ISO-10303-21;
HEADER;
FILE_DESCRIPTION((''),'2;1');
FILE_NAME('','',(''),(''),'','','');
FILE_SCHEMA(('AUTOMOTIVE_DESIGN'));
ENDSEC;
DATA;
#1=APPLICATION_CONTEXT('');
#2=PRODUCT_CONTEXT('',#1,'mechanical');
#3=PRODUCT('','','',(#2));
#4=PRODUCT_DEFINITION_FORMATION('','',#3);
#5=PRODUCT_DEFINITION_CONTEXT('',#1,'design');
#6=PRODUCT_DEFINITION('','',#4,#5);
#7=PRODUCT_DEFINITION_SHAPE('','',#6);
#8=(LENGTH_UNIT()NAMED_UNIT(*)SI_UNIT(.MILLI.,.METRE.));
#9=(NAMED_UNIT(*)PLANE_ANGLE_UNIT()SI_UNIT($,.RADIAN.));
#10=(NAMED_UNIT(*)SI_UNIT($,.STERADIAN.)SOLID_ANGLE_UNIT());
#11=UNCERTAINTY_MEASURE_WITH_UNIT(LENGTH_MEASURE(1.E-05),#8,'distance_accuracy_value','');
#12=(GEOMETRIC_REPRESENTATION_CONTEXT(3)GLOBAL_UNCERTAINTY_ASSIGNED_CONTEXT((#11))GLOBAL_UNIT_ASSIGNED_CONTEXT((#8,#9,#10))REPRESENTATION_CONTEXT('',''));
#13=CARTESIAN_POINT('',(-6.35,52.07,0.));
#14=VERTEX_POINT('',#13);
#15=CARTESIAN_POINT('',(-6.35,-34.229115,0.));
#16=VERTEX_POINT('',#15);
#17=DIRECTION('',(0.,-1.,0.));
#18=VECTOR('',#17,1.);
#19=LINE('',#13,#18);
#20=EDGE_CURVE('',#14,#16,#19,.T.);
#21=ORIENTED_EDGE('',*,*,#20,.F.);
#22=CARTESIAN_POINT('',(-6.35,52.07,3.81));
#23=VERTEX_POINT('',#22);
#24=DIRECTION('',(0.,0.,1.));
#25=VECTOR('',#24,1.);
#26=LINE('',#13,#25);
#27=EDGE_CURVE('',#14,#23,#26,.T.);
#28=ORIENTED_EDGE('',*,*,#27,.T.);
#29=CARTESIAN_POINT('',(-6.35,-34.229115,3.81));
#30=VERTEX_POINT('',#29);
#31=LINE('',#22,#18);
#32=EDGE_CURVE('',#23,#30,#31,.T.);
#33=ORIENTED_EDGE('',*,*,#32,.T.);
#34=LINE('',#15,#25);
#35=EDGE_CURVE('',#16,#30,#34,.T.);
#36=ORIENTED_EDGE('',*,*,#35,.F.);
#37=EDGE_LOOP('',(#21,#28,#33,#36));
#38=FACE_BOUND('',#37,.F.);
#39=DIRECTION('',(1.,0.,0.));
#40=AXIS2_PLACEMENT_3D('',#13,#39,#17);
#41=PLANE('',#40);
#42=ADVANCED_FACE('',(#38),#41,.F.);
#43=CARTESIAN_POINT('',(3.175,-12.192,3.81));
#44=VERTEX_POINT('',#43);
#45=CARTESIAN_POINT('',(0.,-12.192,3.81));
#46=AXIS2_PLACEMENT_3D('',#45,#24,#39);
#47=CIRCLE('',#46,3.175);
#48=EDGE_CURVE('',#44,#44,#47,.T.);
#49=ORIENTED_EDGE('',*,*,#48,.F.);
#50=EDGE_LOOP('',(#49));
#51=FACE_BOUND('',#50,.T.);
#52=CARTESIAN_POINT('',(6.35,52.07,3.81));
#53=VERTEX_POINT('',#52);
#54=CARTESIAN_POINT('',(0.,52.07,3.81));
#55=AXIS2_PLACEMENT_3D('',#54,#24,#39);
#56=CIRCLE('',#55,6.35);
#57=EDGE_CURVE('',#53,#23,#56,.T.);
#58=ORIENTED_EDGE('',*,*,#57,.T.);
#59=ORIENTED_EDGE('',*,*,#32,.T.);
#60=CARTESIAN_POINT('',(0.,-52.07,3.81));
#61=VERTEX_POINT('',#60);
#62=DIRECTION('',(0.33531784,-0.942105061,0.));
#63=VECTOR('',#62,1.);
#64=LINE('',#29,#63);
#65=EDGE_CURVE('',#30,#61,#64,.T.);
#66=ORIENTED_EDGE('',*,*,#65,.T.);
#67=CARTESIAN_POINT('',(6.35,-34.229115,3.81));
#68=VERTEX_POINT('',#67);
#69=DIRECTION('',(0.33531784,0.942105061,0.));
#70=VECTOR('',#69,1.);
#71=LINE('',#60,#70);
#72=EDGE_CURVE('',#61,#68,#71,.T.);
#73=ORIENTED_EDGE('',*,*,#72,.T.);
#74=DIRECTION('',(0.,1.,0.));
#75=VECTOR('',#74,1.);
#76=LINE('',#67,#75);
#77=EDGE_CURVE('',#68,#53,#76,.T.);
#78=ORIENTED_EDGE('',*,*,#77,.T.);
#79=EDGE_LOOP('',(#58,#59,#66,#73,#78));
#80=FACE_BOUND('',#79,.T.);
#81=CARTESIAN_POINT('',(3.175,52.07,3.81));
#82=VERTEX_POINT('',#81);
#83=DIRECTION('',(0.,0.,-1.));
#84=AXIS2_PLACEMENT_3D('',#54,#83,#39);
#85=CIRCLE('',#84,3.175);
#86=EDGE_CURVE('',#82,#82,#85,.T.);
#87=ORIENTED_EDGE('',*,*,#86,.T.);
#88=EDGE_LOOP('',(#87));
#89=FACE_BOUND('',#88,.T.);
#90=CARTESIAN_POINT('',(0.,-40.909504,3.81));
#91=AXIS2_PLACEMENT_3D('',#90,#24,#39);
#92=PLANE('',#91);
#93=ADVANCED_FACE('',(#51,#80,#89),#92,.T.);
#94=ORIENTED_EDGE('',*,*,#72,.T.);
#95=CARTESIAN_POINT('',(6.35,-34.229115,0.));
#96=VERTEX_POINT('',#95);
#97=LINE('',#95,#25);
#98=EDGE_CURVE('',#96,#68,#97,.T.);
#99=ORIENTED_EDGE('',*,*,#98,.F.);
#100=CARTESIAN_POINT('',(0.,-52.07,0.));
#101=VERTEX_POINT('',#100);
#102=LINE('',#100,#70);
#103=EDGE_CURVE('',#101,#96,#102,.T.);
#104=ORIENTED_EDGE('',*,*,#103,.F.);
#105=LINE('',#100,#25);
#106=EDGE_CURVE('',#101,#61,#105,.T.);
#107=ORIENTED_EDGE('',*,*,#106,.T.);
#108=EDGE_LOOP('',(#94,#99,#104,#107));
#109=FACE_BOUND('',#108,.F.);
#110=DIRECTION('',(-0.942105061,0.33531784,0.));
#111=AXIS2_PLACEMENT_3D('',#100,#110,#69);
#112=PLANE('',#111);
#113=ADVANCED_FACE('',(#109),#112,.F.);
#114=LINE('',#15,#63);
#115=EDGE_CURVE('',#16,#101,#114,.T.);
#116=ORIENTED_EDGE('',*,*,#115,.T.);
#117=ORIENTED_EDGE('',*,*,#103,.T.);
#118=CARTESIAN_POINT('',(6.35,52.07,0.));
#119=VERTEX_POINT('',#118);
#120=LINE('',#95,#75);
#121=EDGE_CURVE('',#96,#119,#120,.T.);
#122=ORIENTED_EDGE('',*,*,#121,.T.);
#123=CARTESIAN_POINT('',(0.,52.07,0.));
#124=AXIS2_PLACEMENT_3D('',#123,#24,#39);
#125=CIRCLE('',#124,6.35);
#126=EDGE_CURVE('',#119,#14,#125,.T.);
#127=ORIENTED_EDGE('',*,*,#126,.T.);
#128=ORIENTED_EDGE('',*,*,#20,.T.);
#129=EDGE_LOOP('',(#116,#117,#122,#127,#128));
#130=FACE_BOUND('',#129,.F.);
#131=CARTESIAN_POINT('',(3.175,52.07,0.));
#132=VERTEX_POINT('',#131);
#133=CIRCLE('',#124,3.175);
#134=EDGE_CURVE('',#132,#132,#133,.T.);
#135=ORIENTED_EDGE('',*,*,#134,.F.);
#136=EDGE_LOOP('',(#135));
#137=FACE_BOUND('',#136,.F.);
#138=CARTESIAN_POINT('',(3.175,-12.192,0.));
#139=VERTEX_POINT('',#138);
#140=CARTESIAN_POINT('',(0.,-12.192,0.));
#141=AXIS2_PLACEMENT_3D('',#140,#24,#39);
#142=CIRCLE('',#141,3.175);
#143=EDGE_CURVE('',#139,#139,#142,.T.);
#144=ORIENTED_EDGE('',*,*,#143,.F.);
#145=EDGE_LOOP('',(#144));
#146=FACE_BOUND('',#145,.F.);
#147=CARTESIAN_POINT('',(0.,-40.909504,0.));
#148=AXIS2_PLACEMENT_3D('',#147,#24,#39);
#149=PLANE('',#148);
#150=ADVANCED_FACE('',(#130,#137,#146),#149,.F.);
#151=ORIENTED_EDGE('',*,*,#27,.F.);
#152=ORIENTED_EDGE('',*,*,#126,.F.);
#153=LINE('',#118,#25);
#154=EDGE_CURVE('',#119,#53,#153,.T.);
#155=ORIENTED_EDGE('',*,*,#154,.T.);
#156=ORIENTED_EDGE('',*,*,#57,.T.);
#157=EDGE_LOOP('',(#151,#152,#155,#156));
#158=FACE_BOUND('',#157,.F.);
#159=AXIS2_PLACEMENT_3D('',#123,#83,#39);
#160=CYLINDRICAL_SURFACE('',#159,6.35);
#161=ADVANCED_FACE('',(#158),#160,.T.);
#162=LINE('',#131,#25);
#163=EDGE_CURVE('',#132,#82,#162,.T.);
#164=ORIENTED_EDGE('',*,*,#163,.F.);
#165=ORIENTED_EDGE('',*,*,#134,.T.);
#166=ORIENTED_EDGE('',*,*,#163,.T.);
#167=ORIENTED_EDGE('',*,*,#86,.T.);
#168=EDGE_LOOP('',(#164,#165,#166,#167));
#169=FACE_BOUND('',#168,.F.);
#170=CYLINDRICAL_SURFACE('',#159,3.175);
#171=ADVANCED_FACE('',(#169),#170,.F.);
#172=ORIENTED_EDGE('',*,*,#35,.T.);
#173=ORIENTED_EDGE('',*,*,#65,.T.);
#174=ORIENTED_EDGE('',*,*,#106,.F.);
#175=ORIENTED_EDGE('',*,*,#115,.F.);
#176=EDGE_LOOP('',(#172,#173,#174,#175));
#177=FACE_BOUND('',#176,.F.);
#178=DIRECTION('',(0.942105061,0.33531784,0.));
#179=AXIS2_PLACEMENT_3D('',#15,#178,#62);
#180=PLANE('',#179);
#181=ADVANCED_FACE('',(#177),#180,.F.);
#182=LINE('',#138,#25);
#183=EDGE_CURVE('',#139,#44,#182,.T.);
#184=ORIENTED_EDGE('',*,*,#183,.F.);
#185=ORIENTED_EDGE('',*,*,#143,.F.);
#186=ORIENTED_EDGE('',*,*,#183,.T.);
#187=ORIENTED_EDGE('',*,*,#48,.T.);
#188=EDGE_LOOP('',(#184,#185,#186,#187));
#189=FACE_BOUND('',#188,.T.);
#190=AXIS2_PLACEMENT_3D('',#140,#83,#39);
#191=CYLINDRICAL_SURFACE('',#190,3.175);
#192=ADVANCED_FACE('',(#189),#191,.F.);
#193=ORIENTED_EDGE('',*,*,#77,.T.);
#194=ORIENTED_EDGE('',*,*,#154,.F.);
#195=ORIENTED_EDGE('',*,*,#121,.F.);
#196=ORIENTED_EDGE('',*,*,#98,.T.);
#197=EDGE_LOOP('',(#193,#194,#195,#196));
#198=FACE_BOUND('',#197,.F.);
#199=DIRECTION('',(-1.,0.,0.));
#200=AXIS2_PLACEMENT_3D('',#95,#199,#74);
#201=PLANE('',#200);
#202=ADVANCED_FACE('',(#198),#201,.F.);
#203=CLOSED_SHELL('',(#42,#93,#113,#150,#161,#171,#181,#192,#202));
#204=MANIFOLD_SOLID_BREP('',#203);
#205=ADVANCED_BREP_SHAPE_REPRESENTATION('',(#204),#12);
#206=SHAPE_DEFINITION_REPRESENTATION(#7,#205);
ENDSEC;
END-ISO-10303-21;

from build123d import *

# Parameters (mm, degrees)
F1_DEPTH = 3.81
F0_R     = 3.175
F2_DEPTH = 3.81


# Not quite as in the source:
# - a feature names something its author has since deleted; it is built from what else it names


with BuildPart() as f1:
    # F0 (on Top) → F1 (new body)
    with BuildSketch(Plane.XY):
        with BuildLine():
            ThreePointArc((-3.175, 52.07), (0, 55.245), (3.175, 52.07))
            Line((3.175, 52.07), (6.35, 52.07))
            ThreePointArc((6.35, 52.07), (0, 58.42), (-6.35, 52.07))
            Line((-6.35, 52.07), (-3.175, 52.07))
        make_face()
    extrude(amount=F1_DEPTH)

    # F0 (on Top) → F2 (join)
    with BuildSketch(Plane.XY):
        Polygon((0, -52.07), (6.35, -34.2291146517), (-6.35, -34.2291146517), align=None)
        with BuildLine():
            Line((6.35, 52.07), (3.175, 52.07))
            ThreePointArc((3.175, 52.07), (0, 48.895), (-3.175, 52.07))
            Line((-3.175, 52.07), (-6.35, 52.07))
            Line((-6.35, 52.07), (-6.35, -34.2291146517))
            Line((-6.35, -34.2291146517), (6.35, -34.2291146517))
            Line((6.35, -34.2291146517), (6.35, 52.07))
        make_face()
        with Locations((0, -12.192)):
            Circle(F0_R, mode=Mode.SUBTRACT)
    extrude(amount=F2_DEPTH)


solid = f1.part
